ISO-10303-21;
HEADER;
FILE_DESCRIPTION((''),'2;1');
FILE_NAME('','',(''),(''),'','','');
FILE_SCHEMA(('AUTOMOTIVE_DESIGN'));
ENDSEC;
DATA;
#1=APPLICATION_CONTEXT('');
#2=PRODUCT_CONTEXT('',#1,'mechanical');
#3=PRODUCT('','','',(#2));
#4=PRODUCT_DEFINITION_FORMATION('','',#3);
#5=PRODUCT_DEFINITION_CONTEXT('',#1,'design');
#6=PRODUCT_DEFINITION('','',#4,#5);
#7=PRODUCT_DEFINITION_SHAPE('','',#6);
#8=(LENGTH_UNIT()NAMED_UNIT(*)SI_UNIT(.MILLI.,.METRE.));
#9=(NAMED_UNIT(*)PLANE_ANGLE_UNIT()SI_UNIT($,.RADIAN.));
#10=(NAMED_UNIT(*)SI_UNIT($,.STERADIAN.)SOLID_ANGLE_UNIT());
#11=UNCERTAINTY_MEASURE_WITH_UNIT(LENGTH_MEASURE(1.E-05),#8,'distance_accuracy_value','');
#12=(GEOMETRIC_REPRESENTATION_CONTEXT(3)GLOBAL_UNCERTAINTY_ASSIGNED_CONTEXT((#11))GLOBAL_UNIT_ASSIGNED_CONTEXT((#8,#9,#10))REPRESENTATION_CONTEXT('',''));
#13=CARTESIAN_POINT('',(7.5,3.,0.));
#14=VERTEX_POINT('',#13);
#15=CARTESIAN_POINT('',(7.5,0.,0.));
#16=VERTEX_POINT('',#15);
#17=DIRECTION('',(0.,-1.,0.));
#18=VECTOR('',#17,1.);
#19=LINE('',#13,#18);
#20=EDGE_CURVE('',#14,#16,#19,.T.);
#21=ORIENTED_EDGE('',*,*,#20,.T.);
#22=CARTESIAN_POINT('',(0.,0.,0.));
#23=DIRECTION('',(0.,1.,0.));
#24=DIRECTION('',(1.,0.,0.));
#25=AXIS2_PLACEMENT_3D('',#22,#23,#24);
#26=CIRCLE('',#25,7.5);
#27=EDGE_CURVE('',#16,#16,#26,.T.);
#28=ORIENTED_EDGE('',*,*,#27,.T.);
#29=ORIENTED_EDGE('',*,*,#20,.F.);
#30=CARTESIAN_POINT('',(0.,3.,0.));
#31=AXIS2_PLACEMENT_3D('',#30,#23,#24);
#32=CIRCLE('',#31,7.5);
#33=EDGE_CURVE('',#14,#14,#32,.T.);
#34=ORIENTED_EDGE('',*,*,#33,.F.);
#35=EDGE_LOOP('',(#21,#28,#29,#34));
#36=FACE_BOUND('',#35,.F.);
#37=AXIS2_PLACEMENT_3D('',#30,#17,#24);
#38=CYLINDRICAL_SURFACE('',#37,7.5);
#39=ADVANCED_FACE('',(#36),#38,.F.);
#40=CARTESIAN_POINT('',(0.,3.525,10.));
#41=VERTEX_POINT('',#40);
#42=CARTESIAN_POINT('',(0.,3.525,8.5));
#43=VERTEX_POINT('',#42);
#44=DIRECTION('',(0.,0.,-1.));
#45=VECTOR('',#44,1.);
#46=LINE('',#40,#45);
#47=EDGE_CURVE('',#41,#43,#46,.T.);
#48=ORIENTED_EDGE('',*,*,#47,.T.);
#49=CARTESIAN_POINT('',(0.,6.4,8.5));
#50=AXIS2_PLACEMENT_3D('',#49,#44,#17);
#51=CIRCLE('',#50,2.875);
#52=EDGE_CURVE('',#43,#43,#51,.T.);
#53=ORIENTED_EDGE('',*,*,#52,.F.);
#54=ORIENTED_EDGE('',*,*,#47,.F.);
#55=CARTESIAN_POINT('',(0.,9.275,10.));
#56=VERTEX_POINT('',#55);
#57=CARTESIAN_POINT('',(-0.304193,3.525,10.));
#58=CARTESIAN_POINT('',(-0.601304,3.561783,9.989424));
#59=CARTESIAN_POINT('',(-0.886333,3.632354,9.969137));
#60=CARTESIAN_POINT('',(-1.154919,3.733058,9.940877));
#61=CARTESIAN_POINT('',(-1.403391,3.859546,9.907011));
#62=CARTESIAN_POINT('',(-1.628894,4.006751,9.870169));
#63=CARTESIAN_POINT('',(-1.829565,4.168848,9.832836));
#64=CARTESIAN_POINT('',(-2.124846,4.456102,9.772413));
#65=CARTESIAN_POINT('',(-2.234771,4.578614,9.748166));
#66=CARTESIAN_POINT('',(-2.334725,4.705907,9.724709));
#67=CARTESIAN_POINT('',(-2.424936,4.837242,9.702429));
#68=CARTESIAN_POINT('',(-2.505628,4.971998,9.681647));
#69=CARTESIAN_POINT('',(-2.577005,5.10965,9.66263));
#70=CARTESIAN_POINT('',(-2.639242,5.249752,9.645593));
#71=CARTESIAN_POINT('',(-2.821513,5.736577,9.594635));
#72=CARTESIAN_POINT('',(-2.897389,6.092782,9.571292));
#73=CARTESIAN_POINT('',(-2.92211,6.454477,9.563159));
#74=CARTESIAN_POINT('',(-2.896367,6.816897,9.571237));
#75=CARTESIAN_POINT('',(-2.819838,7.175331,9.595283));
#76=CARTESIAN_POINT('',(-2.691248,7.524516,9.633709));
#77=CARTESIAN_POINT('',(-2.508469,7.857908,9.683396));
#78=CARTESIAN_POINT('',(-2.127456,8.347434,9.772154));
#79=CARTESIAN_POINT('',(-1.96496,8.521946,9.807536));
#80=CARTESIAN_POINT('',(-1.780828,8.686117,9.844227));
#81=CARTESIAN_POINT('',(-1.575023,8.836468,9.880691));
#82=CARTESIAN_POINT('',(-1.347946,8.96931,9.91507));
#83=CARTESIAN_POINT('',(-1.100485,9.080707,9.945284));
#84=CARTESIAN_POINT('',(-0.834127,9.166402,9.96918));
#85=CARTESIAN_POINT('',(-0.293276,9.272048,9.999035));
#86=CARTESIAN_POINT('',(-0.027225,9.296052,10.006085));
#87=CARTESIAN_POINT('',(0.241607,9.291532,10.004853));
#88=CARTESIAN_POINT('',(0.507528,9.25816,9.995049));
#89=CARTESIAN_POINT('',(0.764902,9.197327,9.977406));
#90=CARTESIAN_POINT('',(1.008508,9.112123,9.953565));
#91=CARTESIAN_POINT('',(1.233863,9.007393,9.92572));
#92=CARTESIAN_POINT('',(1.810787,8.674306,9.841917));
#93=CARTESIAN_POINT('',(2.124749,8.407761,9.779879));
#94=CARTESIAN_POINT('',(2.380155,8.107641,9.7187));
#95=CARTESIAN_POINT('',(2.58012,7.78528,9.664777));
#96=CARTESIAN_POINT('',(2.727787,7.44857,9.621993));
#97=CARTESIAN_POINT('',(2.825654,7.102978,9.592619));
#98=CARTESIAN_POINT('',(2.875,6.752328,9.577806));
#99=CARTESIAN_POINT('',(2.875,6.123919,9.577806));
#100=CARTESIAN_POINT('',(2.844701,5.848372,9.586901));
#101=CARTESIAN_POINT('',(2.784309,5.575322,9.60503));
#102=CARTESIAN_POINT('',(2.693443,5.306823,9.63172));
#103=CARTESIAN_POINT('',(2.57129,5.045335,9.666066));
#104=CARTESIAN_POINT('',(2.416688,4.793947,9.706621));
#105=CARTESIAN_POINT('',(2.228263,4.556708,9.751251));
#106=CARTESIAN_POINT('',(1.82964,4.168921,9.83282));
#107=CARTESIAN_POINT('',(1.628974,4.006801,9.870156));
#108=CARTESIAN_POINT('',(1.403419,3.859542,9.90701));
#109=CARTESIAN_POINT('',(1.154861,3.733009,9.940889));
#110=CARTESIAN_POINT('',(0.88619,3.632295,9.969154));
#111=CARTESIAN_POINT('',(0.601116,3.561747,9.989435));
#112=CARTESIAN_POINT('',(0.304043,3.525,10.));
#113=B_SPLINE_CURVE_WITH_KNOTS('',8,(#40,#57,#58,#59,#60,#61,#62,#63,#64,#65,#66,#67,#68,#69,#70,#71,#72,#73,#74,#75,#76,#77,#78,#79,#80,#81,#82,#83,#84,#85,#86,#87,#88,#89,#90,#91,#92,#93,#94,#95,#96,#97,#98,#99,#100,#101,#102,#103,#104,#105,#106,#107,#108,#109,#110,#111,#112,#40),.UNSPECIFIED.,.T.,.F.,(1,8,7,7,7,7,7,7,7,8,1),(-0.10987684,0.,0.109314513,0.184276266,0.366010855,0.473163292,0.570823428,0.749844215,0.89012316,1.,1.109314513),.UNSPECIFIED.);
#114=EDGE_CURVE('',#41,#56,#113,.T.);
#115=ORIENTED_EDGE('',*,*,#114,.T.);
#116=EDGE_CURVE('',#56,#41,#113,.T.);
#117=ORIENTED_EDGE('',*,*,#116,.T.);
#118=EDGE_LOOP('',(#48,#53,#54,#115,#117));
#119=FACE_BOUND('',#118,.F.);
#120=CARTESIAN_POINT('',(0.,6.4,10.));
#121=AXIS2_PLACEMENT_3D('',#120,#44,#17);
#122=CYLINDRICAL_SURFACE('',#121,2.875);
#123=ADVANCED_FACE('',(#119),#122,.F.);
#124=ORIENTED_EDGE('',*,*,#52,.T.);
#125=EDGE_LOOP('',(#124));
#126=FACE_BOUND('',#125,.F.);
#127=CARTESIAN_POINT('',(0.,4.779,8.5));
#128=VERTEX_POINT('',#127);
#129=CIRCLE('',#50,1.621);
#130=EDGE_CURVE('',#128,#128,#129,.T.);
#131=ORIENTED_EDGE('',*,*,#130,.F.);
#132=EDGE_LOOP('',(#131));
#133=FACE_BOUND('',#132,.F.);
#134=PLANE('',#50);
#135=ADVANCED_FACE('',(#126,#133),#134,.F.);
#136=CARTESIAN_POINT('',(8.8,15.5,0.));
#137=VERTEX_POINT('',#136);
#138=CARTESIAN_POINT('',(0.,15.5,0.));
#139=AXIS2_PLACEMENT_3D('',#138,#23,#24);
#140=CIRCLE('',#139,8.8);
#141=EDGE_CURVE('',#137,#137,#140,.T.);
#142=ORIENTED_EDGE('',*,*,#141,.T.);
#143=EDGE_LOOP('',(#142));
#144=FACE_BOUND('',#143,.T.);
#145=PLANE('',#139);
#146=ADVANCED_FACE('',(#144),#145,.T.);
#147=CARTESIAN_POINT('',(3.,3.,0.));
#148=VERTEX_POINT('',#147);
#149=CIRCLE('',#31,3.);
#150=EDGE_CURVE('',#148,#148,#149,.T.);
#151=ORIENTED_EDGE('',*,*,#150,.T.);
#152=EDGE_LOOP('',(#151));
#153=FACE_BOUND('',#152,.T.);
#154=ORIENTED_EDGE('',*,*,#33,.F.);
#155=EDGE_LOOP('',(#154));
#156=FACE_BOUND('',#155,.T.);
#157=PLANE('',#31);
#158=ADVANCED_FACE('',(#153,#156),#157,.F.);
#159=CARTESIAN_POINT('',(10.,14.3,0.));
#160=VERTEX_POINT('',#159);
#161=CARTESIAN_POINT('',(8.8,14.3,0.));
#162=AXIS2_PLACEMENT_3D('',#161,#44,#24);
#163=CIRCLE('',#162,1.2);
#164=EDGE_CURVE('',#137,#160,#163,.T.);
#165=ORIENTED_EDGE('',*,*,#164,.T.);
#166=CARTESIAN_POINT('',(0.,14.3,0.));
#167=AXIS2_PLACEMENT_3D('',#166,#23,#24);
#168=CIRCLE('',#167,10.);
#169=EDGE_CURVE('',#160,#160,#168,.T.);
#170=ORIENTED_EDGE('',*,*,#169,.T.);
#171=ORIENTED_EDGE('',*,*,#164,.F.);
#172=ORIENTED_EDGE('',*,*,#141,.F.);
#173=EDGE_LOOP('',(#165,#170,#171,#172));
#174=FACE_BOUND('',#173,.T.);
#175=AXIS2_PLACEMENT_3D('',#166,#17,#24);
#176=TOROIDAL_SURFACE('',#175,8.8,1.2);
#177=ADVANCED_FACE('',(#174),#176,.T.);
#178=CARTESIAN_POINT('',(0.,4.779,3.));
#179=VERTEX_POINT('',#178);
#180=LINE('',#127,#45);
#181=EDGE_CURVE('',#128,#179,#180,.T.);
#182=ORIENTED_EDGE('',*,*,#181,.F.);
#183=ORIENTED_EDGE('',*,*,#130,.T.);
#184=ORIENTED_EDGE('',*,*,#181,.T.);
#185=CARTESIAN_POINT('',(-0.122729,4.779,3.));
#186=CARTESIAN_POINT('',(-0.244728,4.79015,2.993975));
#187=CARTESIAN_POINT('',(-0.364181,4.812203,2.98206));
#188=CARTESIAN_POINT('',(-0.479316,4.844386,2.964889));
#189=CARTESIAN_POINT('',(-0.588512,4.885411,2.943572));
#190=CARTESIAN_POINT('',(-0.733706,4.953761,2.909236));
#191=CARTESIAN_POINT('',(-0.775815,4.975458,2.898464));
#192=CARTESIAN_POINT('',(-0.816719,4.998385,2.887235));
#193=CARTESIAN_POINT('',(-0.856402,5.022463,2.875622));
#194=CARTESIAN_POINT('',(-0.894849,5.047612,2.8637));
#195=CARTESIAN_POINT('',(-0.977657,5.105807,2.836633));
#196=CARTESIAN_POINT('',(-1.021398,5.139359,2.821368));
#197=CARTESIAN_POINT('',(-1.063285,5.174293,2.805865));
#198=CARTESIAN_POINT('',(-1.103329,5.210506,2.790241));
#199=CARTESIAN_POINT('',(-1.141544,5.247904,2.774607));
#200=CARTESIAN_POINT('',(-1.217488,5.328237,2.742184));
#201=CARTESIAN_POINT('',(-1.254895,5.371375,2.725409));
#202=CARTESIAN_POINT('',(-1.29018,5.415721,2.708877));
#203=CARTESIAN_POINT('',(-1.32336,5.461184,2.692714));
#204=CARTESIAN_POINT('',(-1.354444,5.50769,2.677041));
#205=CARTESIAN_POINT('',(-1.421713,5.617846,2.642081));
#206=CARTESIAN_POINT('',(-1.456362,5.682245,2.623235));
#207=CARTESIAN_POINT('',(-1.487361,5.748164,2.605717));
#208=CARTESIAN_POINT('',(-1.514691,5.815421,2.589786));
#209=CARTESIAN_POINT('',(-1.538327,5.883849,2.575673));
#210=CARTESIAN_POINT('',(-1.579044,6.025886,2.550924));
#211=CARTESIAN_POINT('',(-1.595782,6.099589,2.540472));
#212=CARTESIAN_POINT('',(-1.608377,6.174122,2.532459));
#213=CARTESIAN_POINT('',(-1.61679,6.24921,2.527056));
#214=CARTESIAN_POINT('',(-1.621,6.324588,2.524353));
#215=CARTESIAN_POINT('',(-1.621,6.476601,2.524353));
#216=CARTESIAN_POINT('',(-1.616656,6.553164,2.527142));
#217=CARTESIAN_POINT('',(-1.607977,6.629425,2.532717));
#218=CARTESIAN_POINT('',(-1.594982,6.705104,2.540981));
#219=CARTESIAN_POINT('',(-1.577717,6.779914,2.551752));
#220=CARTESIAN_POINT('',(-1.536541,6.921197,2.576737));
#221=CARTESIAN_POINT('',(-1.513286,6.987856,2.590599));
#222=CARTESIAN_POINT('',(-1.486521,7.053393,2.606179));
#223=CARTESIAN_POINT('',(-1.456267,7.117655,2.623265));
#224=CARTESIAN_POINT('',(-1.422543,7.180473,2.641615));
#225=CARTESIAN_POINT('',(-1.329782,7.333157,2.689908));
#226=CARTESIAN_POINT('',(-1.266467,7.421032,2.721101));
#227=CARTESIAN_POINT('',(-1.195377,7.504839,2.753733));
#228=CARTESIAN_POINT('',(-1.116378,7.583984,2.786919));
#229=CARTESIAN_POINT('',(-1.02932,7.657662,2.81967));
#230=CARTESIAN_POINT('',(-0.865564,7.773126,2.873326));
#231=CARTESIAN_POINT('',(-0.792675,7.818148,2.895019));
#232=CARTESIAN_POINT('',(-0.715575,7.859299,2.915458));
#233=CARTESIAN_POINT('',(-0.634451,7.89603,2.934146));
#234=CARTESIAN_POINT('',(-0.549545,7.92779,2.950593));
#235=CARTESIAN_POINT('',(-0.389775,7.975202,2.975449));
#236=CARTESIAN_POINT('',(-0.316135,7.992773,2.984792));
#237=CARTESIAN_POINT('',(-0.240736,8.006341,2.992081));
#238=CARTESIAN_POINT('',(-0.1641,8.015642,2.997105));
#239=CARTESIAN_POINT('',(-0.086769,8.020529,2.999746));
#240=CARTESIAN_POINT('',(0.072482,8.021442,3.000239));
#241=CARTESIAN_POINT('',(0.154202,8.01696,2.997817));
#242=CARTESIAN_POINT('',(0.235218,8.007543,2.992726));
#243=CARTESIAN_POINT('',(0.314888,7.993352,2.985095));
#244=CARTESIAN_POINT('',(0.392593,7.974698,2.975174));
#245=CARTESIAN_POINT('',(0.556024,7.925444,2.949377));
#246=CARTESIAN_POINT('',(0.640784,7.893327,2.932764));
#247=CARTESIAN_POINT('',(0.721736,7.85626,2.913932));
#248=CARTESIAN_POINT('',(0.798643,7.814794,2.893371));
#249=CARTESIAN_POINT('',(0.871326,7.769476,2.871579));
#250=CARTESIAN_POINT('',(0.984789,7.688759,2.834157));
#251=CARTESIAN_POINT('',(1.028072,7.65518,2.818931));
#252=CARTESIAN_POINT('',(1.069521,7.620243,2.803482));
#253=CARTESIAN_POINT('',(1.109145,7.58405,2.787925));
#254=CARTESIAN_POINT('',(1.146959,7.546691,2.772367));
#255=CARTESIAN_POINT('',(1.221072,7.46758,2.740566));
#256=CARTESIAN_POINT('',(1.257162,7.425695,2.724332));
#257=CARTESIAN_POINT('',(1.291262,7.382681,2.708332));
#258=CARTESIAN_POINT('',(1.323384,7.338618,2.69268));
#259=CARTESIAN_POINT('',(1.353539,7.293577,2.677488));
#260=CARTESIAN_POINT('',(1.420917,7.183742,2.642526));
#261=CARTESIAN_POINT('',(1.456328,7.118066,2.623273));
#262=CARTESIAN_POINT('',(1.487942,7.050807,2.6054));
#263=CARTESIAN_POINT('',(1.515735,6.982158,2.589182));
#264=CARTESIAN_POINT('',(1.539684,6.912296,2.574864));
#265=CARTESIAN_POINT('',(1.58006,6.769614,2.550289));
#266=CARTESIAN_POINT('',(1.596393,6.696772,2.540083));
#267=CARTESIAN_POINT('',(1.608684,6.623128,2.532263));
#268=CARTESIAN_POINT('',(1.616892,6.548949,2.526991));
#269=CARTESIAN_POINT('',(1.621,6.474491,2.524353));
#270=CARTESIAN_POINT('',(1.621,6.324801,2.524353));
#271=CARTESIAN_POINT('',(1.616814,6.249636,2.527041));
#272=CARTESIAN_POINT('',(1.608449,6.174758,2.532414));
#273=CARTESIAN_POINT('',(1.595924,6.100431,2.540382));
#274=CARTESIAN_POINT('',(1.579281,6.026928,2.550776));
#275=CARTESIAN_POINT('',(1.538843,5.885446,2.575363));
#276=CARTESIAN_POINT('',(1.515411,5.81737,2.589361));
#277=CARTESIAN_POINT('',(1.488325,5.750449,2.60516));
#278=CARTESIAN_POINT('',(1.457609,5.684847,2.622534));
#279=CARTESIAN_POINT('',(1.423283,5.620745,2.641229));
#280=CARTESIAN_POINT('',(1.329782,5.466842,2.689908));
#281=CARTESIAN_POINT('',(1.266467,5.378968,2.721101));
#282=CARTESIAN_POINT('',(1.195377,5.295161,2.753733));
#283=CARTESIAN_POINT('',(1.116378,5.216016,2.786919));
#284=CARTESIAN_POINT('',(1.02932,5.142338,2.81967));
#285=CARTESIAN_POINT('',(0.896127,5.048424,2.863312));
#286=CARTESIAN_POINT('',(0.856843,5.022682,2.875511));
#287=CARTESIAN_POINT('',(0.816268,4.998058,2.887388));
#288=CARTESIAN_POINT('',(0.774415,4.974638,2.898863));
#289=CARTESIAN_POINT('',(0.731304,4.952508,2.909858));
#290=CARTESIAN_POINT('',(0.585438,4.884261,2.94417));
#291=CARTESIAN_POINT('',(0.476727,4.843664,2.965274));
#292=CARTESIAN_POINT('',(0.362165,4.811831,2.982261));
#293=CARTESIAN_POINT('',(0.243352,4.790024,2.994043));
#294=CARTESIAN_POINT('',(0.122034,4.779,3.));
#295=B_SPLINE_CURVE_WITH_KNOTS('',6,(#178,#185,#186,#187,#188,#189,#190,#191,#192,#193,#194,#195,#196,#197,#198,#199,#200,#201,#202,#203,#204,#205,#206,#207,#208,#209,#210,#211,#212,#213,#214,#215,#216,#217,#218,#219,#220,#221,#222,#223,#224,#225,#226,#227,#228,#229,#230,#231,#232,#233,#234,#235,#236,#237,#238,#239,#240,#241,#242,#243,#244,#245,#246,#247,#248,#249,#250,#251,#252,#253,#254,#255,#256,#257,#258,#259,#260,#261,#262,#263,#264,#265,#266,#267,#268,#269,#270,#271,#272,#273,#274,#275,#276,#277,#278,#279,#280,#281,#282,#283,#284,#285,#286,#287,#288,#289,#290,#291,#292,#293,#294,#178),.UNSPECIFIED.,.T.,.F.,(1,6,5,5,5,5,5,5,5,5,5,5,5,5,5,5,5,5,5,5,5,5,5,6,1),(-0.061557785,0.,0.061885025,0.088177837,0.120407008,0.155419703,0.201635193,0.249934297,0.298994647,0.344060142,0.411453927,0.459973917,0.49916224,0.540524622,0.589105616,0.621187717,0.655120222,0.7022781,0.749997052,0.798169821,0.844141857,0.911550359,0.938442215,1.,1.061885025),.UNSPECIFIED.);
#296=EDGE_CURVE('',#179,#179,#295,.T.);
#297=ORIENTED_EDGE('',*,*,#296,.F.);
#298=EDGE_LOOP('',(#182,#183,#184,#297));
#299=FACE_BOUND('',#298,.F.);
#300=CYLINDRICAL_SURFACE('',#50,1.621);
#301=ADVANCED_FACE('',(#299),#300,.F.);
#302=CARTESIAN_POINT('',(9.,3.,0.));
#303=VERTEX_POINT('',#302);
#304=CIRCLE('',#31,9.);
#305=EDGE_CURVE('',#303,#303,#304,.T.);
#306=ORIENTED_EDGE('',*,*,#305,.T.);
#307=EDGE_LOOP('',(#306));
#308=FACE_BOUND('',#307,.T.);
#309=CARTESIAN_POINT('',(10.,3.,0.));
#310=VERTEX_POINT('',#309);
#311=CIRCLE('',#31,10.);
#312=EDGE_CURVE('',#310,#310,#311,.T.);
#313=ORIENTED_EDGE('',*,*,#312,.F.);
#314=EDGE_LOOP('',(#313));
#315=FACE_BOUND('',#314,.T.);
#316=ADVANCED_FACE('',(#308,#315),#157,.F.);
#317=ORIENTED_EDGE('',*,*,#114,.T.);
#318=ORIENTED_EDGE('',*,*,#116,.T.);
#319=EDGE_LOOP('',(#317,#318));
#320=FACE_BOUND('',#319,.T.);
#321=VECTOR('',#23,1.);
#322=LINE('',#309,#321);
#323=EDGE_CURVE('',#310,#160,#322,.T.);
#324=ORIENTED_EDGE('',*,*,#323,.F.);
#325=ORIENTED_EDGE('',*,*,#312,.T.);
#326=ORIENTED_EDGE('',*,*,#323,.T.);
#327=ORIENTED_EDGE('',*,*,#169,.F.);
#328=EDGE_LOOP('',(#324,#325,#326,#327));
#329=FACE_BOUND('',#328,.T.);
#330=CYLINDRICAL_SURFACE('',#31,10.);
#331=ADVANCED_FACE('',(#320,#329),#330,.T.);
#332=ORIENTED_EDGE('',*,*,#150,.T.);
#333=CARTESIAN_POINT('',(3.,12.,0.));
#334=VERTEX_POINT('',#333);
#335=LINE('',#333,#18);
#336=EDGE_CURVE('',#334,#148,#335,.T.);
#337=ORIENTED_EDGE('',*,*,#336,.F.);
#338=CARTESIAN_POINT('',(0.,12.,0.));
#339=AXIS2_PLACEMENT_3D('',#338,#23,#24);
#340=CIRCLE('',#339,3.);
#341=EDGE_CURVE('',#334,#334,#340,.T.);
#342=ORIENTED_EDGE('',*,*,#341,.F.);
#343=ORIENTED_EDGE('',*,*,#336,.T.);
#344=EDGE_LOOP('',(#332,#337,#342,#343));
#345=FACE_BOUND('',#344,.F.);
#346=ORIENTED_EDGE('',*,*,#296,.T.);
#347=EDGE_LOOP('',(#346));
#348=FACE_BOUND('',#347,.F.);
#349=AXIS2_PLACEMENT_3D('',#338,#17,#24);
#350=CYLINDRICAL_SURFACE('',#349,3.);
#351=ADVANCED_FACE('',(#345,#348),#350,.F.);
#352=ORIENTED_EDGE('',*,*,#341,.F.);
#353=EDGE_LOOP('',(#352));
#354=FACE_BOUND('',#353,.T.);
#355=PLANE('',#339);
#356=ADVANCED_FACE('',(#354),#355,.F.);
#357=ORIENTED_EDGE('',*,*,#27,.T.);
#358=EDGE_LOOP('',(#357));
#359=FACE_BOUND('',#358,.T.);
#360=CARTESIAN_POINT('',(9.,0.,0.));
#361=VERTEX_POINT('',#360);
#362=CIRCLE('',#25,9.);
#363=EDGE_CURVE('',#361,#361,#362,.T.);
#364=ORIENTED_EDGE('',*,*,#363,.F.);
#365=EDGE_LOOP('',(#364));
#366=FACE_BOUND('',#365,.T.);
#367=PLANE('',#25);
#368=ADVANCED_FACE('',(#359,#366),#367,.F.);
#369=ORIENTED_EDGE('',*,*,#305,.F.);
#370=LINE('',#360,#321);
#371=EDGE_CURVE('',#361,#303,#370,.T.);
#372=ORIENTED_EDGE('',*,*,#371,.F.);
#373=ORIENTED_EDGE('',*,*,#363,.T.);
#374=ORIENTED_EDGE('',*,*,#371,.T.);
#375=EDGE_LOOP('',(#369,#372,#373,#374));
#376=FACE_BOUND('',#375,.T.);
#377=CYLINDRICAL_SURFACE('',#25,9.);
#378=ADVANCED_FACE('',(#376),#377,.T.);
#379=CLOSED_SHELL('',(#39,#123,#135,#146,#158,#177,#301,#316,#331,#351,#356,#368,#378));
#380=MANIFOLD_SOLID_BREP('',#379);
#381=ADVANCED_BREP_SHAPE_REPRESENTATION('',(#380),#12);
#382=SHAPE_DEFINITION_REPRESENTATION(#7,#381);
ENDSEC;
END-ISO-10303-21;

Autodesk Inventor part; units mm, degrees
ref_plane "YZ Plane" through (0, 0, 0) normal (1, 0, 0) x (0, 1, 0)
ref_plane "XZ Plane" through (0, 0, 0) normal (0, 1, 0) x (-1, 0, 0)
sketch "Sketch1" plane through (0, 0, 0) normal (0, 0, 1) x (1, 0, 0)
  line L0 (0, -3.1) -> (0, 18.6) construction
  line L1 (-2, 0) -> (12, 0) construction
  line L2 (9, 0) -> (9, 3)
  line L3 (9, 3) -> (10, 3)
  line L4 (10, 3) -> (10, 15.5)
  line L5 (10, 15.5) -> (0, 15.5)
  line L6 (0, 15.5) -> (0, 12)
  line L7 (0, 12) -> (3, 12)
  line L8 (3, 12) -> (3, 3)
  line L9 (3, 3) -> (7.5, 3)
  line L10 (7.5, 3) -> (7.5, 0)
  line L11 (7.5, 0) -> (9, 0)
  point P0 (0, 0)
  point P1 (3, 7.5)
  dimension "d0" = 15.5
  dimension "d1" = 12
  dimension "d2" = 3
  dimension "d4" = 6
  dimension "d5" = 15
  dimension "d6" = 18
  dimension "d7" = 20
revolve "Revolution1" add sketch "Sketch1" angle 360 about axis through (0, -10, 0) along (0, 1, 0)
fillet "Fillet1" radius 1.2 1 edges at (-10, 15.5, 0)
ref_plane "Work Plane1" through (0, 9.25, 10) normal (0, 0, 1) x (1, 0, 0)
sketch "Sketch3" plane through (0, 9.25, 10) normal (0, 0, 1) x (1, 0, 0)
  line L0 (9, -9.25) -> (-9, -9.25) construction
  line L1 (0, -12.35) -> (0, 9.35) construction
  point P0 (0, -9.25)
  point P1 (0, -2.85)
  dimension "d11" = 6.4
hole "Hole1" at (0, 6.4, 10) direction (0, 0, -1) diameter 3.242 end up to surface counterbore diameter 5.75 counterbore depth 1.5 thread size "M4x0.7" class "6H" standard "ISO Metric profile"
properties part number "encoder_cap"
